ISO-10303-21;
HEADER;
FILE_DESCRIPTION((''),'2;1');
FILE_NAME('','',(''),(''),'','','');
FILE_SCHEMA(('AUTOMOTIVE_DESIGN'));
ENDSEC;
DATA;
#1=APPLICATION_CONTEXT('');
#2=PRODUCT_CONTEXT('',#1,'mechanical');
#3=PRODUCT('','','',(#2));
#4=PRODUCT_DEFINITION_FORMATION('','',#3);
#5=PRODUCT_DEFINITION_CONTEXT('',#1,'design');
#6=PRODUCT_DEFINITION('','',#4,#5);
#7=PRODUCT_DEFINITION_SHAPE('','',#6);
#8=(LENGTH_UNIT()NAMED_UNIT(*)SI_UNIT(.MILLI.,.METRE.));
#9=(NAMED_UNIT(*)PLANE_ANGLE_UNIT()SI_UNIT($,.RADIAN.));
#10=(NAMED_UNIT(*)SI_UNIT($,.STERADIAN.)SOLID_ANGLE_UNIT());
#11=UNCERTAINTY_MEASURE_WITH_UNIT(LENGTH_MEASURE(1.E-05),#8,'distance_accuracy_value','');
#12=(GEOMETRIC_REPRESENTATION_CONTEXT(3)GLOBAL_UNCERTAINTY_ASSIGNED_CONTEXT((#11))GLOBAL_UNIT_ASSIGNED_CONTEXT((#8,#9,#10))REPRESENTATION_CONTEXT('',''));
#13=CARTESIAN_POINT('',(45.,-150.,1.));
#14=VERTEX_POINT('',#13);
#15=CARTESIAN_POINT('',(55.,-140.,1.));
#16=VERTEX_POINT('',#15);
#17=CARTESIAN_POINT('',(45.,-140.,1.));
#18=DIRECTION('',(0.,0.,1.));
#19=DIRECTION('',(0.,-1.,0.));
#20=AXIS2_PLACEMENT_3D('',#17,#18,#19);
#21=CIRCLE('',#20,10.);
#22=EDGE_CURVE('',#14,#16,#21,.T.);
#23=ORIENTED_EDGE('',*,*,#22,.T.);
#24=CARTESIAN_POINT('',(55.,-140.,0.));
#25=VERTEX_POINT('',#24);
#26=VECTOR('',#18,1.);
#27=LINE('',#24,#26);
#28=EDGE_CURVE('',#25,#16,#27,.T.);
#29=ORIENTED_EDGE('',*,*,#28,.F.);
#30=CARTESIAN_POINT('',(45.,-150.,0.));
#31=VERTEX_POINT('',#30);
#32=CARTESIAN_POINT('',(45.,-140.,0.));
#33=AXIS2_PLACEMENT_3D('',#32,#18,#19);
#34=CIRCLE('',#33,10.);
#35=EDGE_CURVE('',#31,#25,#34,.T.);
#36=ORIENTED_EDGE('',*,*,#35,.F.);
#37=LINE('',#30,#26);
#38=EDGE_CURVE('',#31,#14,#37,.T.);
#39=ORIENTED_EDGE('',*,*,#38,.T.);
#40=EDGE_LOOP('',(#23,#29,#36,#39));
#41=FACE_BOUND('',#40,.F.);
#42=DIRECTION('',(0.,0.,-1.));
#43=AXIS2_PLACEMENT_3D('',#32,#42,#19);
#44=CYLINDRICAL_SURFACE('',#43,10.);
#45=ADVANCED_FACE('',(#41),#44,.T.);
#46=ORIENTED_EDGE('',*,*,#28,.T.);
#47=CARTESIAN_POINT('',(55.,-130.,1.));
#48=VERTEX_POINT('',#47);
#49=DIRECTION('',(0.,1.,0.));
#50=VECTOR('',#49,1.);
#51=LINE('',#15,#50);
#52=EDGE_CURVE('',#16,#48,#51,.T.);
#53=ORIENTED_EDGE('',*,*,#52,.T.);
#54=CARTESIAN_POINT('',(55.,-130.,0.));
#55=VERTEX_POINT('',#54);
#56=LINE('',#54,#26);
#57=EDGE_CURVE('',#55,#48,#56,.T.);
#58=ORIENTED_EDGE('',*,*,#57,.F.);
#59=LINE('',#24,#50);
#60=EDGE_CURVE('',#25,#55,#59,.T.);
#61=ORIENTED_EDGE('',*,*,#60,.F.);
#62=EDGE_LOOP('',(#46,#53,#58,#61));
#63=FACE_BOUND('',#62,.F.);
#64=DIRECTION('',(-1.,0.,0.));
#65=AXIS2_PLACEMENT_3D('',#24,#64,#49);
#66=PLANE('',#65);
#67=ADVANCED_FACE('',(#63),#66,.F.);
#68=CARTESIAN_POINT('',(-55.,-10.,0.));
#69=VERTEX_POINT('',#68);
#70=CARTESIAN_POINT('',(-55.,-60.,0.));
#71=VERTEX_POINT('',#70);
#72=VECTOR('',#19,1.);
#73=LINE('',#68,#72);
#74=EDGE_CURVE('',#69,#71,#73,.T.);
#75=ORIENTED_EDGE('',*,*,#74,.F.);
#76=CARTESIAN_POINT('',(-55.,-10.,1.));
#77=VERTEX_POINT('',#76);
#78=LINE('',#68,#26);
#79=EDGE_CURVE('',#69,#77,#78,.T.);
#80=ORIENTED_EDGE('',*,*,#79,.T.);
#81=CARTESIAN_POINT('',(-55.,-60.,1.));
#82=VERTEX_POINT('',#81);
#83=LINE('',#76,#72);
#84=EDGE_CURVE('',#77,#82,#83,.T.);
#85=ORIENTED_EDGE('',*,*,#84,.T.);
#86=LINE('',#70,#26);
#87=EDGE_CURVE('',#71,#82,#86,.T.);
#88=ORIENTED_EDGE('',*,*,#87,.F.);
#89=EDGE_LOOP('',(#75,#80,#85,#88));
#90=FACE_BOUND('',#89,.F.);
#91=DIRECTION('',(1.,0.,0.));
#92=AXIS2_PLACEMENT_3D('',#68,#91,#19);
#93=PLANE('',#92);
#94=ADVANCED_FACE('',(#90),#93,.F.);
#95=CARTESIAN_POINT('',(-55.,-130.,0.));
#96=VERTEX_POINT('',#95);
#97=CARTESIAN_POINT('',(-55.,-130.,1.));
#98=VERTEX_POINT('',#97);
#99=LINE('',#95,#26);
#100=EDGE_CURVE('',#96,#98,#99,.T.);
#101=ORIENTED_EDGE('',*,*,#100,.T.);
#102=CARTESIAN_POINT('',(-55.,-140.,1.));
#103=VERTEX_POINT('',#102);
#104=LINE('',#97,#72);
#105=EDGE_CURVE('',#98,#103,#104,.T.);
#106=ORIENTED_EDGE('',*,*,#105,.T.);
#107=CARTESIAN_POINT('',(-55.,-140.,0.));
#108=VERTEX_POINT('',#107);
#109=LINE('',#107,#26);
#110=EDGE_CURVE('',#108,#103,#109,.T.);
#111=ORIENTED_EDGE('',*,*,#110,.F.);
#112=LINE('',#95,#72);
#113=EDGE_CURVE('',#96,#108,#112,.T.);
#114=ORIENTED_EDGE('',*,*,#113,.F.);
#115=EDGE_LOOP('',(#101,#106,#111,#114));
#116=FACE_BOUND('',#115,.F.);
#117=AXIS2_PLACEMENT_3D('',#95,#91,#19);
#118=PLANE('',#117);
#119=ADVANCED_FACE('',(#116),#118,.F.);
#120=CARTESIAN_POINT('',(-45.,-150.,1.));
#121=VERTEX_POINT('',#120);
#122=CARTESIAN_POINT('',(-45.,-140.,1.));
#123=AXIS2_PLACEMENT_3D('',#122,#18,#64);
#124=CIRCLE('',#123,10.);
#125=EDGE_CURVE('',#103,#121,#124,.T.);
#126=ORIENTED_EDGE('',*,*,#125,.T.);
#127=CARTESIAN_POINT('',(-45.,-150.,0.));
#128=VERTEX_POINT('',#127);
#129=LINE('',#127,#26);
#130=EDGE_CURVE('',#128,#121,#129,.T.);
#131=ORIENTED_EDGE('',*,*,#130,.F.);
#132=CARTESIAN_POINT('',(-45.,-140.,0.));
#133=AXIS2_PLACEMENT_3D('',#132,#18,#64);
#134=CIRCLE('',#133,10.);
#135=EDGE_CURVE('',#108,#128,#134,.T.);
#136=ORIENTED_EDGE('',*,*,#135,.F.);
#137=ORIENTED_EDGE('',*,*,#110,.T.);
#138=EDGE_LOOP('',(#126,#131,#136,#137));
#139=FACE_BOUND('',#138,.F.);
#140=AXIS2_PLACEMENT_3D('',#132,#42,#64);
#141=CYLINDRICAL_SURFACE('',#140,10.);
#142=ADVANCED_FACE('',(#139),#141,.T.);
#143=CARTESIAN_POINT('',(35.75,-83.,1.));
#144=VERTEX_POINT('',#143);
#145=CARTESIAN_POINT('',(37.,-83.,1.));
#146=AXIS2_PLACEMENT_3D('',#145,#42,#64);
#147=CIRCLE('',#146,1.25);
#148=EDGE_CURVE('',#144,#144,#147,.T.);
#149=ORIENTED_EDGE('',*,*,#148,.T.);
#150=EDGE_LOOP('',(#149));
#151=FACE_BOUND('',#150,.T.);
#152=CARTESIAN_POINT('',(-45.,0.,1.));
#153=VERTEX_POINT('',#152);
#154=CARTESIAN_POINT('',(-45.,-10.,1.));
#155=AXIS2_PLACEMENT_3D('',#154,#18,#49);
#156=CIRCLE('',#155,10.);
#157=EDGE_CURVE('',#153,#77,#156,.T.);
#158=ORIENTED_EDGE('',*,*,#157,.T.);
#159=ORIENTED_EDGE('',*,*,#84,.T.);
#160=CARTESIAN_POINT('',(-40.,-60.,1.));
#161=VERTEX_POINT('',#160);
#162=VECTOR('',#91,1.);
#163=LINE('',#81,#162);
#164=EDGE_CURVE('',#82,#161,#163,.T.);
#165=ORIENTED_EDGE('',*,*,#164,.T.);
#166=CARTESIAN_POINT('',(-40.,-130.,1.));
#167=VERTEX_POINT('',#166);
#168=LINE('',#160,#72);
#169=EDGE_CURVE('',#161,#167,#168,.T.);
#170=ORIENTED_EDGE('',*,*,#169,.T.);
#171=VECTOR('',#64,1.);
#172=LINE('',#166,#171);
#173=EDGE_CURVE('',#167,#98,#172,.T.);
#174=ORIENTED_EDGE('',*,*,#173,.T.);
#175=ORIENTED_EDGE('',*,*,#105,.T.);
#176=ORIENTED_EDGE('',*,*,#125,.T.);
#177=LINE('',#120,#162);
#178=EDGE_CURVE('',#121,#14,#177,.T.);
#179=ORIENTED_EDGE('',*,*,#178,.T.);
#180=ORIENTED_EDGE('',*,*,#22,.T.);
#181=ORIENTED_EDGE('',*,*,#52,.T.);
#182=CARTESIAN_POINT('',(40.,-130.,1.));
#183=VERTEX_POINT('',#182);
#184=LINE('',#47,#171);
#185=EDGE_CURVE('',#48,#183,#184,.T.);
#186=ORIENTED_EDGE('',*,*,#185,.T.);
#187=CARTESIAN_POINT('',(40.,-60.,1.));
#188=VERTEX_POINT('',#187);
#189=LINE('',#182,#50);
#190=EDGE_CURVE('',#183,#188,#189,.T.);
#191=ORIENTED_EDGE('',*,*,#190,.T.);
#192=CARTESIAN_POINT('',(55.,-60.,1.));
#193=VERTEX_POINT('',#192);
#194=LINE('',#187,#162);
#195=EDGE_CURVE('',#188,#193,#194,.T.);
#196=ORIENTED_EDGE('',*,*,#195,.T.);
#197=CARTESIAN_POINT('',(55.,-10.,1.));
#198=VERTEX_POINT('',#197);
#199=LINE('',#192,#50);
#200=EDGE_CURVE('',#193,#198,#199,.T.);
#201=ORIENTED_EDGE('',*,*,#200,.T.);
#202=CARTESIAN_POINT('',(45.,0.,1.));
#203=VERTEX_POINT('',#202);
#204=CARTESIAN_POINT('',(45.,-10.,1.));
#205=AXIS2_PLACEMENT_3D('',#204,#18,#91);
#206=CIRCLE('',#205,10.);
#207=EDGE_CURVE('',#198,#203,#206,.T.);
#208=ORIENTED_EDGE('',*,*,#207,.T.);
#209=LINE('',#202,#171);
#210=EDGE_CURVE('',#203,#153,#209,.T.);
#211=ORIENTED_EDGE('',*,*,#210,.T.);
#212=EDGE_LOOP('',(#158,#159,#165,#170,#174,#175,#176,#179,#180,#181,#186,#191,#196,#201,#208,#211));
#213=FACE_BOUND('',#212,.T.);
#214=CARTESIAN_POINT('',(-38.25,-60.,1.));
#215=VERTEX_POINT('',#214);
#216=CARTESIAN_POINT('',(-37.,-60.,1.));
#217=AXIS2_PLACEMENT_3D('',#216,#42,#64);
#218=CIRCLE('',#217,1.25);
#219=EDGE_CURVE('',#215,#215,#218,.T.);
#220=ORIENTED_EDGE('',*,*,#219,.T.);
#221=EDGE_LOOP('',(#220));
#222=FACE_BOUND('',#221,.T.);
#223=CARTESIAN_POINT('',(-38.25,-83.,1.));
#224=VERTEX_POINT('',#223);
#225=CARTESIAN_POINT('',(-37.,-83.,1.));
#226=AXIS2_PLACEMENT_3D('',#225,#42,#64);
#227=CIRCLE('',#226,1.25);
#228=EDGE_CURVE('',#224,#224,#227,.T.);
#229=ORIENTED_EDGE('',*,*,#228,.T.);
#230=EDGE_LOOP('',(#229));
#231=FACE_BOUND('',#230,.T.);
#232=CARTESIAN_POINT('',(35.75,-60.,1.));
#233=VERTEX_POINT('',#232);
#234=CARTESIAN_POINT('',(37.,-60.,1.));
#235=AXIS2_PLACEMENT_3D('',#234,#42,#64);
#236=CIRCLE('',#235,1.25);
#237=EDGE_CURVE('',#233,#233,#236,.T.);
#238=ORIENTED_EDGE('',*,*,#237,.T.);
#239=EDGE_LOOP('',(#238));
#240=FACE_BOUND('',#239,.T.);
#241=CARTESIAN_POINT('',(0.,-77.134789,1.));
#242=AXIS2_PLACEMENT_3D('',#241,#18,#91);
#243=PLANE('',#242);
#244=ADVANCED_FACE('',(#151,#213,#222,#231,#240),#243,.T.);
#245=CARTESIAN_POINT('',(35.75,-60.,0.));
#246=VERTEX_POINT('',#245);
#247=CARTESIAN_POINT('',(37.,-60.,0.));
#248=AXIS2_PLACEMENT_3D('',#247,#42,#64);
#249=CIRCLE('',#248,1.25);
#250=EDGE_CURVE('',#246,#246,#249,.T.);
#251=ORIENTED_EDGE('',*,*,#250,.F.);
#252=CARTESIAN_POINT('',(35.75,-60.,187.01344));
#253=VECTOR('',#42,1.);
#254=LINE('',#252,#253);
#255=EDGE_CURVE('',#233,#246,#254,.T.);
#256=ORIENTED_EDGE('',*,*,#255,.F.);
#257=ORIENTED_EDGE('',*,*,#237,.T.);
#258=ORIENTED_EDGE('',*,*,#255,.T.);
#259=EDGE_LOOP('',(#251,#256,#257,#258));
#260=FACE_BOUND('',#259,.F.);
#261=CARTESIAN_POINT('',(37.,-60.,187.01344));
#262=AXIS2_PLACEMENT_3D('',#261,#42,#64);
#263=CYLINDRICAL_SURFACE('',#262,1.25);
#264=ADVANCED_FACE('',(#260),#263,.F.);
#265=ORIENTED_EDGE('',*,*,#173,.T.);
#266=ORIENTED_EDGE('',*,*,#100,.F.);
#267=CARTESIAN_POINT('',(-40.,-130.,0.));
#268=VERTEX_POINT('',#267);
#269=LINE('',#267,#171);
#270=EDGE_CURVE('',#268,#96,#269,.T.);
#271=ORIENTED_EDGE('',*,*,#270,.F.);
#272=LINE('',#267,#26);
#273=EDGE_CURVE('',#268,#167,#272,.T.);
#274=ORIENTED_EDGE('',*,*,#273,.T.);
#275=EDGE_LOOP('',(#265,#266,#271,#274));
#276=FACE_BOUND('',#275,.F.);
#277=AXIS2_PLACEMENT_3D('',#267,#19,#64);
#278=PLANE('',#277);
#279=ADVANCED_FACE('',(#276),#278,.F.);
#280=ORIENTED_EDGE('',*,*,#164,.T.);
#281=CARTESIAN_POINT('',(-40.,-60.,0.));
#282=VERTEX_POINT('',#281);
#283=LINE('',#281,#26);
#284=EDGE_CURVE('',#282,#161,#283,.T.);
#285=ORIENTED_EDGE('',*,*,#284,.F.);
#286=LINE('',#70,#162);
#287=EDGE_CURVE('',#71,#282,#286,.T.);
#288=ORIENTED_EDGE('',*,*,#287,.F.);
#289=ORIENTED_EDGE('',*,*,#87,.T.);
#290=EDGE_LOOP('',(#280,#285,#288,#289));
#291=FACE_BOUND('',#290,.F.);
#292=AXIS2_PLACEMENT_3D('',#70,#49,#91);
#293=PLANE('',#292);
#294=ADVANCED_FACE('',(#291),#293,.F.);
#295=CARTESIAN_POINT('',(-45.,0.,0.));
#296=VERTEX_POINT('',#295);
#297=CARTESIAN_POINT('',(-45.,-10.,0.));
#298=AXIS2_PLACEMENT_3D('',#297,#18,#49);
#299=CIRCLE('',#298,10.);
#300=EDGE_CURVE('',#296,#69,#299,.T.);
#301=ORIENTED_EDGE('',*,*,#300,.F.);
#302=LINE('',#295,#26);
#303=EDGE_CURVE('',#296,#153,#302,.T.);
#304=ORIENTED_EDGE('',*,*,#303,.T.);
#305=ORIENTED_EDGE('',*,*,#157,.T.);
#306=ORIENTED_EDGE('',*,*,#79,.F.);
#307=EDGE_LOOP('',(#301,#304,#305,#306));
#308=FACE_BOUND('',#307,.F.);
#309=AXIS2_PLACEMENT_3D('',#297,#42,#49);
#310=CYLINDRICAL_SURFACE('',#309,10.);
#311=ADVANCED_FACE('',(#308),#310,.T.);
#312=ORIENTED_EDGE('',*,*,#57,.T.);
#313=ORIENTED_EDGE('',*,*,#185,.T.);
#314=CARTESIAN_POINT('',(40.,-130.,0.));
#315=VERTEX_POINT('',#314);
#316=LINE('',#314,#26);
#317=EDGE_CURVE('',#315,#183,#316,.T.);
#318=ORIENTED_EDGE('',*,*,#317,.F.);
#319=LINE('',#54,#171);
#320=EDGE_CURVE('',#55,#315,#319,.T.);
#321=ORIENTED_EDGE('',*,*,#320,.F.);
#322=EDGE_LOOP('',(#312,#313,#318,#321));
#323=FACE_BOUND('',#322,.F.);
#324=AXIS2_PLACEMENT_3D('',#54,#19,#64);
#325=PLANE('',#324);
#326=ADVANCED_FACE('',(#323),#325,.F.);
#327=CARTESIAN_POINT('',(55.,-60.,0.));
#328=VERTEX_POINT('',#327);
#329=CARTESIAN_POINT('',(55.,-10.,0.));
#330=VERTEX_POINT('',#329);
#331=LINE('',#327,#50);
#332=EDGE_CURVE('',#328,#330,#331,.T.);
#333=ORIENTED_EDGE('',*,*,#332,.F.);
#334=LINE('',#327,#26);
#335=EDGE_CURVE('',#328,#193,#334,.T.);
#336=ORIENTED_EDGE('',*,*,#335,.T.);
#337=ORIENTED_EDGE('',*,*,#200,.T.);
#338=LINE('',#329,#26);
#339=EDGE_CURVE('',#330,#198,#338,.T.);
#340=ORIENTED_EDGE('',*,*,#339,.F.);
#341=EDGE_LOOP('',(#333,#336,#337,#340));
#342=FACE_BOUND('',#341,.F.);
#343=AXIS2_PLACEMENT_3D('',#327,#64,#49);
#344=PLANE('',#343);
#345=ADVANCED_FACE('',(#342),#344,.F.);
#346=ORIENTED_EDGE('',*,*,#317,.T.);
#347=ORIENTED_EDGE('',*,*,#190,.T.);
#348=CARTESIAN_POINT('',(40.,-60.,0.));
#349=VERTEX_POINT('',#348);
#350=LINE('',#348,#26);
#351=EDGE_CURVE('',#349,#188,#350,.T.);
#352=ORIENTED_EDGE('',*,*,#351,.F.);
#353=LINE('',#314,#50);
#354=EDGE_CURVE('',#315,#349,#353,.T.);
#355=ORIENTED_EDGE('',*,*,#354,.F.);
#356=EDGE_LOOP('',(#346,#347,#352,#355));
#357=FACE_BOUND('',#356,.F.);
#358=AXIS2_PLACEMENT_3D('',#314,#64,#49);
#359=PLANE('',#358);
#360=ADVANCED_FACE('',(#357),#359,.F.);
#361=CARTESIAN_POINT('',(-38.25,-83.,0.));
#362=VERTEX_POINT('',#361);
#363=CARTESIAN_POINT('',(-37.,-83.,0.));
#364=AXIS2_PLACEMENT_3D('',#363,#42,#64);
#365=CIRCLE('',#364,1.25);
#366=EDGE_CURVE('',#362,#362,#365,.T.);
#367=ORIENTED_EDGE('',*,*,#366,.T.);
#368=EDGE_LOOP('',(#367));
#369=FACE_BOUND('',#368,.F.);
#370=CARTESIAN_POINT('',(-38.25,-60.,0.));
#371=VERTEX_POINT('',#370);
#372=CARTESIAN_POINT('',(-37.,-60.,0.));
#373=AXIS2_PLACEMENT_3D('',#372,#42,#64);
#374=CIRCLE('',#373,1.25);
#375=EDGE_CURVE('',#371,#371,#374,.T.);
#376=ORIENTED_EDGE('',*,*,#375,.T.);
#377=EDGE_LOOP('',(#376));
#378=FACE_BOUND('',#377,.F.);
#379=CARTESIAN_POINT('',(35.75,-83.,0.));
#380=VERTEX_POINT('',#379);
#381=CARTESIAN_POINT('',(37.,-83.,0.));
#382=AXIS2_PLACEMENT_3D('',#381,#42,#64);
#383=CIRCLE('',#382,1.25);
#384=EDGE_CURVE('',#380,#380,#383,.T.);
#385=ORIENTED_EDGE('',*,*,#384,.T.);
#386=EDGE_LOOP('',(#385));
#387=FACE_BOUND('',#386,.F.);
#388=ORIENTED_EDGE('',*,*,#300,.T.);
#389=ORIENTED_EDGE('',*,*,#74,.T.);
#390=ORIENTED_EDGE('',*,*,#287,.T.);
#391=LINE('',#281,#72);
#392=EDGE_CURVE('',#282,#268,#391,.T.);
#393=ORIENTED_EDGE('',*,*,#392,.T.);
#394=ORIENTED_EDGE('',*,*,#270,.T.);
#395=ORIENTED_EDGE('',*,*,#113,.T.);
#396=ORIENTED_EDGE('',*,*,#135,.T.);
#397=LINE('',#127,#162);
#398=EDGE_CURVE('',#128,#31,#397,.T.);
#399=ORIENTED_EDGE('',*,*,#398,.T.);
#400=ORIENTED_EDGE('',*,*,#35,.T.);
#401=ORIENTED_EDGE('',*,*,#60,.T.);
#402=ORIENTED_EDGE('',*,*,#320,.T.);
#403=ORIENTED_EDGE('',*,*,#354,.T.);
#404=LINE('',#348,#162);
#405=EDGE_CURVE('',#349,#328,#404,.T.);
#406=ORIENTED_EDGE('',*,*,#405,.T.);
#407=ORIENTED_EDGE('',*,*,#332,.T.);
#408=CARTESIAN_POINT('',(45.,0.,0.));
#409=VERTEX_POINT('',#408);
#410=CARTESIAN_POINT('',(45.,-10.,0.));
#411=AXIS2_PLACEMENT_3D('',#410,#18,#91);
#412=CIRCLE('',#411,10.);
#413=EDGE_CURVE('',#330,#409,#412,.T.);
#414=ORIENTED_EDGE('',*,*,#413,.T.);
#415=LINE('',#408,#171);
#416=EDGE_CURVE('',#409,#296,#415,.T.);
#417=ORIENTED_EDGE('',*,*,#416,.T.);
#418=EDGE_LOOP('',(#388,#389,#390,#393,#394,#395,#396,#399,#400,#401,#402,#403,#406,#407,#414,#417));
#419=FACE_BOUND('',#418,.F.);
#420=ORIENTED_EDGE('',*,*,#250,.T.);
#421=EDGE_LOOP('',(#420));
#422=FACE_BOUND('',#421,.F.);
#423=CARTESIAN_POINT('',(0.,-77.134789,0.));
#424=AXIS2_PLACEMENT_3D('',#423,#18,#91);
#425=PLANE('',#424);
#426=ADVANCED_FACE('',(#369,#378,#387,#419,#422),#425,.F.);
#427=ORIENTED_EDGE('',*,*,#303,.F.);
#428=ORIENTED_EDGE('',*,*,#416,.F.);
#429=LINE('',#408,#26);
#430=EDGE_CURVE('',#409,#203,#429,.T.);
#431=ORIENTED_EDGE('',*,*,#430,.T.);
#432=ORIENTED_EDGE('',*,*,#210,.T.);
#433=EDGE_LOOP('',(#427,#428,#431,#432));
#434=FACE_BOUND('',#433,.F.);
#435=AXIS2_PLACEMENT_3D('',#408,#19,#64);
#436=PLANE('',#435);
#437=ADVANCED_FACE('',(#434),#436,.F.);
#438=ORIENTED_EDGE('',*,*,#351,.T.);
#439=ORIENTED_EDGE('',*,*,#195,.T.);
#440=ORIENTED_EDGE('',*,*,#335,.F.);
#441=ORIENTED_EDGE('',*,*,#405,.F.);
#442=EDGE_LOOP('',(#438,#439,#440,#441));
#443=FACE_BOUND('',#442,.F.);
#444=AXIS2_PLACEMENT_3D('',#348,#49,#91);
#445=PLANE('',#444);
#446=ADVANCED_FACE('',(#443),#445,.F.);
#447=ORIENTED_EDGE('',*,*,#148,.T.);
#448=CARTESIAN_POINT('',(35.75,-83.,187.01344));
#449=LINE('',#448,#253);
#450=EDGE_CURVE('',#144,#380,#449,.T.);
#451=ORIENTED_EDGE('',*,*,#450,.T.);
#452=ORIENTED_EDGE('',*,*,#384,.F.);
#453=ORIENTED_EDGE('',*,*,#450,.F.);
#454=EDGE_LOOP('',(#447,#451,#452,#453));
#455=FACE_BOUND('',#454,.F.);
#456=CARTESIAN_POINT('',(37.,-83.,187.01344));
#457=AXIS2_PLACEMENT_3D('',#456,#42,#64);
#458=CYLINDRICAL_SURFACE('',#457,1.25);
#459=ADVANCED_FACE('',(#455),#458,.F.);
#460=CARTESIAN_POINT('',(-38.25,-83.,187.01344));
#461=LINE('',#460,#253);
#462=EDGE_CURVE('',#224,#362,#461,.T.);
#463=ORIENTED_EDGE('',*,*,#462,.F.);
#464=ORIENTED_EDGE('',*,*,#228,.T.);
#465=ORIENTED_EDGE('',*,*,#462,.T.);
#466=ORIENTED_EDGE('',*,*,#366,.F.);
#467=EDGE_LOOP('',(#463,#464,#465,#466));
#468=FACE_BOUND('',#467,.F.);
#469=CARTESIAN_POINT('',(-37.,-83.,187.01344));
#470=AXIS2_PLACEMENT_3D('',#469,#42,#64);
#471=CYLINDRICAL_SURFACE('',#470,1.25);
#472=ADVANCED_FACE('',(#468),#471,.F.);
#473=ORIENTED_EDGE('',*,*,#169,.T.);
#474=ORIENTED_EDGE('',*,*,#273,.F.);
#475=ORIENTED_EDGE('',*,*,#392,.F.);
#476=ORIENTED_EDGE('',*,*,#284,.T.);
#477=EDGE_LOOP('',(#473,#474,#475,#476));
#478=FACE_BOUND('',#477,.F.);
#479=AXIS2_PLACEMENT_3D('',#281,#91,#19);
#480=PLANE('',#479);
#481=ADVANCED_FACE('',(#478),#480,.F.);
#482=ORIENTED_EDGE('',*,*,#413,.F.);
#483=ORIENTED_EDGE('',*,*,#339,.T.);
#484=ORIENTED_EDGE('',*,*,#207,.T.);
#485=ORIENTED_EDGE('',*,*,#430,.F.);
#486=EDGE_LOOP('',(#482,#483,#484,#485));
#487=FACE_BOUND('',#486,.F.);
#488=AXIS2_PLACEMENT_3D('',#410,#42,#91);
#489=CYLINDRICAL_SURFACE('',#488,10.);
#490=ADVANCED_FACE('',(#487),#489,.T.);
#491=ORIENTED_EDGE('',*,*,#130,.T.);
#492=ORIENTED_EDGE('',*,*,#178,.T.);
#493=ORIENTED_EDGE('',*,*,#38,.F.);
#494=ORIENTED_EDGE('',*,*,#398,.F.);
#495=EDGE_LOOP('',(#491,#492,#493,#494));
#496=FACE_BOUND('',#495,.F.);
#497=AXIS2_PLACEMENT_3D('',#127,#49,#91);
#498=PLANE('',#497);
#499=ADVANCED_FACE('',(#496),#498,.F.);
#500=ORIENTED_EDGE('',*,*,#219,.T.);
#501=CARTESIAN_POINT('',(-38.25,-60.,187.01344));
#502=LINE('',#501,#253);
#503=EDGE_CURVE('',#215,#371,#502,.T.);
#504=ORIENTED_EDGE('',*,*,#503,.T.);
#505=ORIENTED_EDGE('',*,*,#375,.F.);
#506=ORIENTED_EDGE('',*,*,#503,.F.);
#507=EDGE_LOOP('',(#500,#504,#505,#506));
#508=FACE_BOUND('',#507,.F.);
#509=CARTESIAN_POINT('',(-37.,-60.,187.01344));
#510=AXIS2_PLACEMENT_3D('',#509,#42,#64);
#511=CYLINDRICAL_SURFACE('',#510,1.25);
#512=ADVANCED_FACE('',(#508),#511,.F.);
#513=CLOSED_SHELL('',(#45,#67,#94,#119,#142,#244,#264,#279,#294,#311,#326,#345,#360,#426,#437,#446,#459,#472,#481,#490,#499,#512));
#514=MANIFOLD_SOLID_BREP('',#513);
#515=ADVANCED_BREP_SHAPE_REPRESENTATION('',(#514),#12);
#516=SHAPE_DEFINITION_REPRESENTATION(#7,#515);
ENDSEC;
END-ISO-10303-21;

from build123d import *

# Parameters (mm, degrees)
F1_DEPTH = 1
F3_D     = 2.5


# Not quite as in the source:
# - a feature names something its author has since deleted; it is built from what else it names


with BuildPart() as f1:
    # F0 (on Top) → F1 (new body)
    with BuildSketch(Plane.XY):
        with BuildLine():
            Line((45, 0), (-45, 0))
            ThreePointArc((-45, 0), (-52.0710678119, -2.9289321881), (-55, -10))
            Line((-55, -10), (-55, -60))
            Line((-55, -60), (-40, -60))
            Line((-40, -60), (-40, -130))
            Line((-40, -130), (-55, -130))
            Line((-55, -130), (-55, -140))
            ThreePointArc((-55, -140), (-52.0710678119, -147.0710678119), (-45, -150))
            Line((-45, -150), (45, -150))
            ThreePointArc((45, -150), (52.0710678119, -147.0710678119), (55, -140))
            Line((55, -140), (55, -130))
            Line((55, -130), (40, -130))
            Line((40, -130), (40, -60))
            Line((40, -60), (55, -60))
            Line((55, -60), (55, -10))
            ThreePointArc((55, -10), (52.0710678119, -2.9289321881), (45, 0))
        make_face()
    extrude(amount=F1_DEPTH)

    # F3 (through all)
    with Locations(Plane.XY.offset(1)):
        with Locations((37, -60), (37, -83), (-37, -60), (-37, -83)):
            Hole(F3_D / 2)


solid = f1.part
